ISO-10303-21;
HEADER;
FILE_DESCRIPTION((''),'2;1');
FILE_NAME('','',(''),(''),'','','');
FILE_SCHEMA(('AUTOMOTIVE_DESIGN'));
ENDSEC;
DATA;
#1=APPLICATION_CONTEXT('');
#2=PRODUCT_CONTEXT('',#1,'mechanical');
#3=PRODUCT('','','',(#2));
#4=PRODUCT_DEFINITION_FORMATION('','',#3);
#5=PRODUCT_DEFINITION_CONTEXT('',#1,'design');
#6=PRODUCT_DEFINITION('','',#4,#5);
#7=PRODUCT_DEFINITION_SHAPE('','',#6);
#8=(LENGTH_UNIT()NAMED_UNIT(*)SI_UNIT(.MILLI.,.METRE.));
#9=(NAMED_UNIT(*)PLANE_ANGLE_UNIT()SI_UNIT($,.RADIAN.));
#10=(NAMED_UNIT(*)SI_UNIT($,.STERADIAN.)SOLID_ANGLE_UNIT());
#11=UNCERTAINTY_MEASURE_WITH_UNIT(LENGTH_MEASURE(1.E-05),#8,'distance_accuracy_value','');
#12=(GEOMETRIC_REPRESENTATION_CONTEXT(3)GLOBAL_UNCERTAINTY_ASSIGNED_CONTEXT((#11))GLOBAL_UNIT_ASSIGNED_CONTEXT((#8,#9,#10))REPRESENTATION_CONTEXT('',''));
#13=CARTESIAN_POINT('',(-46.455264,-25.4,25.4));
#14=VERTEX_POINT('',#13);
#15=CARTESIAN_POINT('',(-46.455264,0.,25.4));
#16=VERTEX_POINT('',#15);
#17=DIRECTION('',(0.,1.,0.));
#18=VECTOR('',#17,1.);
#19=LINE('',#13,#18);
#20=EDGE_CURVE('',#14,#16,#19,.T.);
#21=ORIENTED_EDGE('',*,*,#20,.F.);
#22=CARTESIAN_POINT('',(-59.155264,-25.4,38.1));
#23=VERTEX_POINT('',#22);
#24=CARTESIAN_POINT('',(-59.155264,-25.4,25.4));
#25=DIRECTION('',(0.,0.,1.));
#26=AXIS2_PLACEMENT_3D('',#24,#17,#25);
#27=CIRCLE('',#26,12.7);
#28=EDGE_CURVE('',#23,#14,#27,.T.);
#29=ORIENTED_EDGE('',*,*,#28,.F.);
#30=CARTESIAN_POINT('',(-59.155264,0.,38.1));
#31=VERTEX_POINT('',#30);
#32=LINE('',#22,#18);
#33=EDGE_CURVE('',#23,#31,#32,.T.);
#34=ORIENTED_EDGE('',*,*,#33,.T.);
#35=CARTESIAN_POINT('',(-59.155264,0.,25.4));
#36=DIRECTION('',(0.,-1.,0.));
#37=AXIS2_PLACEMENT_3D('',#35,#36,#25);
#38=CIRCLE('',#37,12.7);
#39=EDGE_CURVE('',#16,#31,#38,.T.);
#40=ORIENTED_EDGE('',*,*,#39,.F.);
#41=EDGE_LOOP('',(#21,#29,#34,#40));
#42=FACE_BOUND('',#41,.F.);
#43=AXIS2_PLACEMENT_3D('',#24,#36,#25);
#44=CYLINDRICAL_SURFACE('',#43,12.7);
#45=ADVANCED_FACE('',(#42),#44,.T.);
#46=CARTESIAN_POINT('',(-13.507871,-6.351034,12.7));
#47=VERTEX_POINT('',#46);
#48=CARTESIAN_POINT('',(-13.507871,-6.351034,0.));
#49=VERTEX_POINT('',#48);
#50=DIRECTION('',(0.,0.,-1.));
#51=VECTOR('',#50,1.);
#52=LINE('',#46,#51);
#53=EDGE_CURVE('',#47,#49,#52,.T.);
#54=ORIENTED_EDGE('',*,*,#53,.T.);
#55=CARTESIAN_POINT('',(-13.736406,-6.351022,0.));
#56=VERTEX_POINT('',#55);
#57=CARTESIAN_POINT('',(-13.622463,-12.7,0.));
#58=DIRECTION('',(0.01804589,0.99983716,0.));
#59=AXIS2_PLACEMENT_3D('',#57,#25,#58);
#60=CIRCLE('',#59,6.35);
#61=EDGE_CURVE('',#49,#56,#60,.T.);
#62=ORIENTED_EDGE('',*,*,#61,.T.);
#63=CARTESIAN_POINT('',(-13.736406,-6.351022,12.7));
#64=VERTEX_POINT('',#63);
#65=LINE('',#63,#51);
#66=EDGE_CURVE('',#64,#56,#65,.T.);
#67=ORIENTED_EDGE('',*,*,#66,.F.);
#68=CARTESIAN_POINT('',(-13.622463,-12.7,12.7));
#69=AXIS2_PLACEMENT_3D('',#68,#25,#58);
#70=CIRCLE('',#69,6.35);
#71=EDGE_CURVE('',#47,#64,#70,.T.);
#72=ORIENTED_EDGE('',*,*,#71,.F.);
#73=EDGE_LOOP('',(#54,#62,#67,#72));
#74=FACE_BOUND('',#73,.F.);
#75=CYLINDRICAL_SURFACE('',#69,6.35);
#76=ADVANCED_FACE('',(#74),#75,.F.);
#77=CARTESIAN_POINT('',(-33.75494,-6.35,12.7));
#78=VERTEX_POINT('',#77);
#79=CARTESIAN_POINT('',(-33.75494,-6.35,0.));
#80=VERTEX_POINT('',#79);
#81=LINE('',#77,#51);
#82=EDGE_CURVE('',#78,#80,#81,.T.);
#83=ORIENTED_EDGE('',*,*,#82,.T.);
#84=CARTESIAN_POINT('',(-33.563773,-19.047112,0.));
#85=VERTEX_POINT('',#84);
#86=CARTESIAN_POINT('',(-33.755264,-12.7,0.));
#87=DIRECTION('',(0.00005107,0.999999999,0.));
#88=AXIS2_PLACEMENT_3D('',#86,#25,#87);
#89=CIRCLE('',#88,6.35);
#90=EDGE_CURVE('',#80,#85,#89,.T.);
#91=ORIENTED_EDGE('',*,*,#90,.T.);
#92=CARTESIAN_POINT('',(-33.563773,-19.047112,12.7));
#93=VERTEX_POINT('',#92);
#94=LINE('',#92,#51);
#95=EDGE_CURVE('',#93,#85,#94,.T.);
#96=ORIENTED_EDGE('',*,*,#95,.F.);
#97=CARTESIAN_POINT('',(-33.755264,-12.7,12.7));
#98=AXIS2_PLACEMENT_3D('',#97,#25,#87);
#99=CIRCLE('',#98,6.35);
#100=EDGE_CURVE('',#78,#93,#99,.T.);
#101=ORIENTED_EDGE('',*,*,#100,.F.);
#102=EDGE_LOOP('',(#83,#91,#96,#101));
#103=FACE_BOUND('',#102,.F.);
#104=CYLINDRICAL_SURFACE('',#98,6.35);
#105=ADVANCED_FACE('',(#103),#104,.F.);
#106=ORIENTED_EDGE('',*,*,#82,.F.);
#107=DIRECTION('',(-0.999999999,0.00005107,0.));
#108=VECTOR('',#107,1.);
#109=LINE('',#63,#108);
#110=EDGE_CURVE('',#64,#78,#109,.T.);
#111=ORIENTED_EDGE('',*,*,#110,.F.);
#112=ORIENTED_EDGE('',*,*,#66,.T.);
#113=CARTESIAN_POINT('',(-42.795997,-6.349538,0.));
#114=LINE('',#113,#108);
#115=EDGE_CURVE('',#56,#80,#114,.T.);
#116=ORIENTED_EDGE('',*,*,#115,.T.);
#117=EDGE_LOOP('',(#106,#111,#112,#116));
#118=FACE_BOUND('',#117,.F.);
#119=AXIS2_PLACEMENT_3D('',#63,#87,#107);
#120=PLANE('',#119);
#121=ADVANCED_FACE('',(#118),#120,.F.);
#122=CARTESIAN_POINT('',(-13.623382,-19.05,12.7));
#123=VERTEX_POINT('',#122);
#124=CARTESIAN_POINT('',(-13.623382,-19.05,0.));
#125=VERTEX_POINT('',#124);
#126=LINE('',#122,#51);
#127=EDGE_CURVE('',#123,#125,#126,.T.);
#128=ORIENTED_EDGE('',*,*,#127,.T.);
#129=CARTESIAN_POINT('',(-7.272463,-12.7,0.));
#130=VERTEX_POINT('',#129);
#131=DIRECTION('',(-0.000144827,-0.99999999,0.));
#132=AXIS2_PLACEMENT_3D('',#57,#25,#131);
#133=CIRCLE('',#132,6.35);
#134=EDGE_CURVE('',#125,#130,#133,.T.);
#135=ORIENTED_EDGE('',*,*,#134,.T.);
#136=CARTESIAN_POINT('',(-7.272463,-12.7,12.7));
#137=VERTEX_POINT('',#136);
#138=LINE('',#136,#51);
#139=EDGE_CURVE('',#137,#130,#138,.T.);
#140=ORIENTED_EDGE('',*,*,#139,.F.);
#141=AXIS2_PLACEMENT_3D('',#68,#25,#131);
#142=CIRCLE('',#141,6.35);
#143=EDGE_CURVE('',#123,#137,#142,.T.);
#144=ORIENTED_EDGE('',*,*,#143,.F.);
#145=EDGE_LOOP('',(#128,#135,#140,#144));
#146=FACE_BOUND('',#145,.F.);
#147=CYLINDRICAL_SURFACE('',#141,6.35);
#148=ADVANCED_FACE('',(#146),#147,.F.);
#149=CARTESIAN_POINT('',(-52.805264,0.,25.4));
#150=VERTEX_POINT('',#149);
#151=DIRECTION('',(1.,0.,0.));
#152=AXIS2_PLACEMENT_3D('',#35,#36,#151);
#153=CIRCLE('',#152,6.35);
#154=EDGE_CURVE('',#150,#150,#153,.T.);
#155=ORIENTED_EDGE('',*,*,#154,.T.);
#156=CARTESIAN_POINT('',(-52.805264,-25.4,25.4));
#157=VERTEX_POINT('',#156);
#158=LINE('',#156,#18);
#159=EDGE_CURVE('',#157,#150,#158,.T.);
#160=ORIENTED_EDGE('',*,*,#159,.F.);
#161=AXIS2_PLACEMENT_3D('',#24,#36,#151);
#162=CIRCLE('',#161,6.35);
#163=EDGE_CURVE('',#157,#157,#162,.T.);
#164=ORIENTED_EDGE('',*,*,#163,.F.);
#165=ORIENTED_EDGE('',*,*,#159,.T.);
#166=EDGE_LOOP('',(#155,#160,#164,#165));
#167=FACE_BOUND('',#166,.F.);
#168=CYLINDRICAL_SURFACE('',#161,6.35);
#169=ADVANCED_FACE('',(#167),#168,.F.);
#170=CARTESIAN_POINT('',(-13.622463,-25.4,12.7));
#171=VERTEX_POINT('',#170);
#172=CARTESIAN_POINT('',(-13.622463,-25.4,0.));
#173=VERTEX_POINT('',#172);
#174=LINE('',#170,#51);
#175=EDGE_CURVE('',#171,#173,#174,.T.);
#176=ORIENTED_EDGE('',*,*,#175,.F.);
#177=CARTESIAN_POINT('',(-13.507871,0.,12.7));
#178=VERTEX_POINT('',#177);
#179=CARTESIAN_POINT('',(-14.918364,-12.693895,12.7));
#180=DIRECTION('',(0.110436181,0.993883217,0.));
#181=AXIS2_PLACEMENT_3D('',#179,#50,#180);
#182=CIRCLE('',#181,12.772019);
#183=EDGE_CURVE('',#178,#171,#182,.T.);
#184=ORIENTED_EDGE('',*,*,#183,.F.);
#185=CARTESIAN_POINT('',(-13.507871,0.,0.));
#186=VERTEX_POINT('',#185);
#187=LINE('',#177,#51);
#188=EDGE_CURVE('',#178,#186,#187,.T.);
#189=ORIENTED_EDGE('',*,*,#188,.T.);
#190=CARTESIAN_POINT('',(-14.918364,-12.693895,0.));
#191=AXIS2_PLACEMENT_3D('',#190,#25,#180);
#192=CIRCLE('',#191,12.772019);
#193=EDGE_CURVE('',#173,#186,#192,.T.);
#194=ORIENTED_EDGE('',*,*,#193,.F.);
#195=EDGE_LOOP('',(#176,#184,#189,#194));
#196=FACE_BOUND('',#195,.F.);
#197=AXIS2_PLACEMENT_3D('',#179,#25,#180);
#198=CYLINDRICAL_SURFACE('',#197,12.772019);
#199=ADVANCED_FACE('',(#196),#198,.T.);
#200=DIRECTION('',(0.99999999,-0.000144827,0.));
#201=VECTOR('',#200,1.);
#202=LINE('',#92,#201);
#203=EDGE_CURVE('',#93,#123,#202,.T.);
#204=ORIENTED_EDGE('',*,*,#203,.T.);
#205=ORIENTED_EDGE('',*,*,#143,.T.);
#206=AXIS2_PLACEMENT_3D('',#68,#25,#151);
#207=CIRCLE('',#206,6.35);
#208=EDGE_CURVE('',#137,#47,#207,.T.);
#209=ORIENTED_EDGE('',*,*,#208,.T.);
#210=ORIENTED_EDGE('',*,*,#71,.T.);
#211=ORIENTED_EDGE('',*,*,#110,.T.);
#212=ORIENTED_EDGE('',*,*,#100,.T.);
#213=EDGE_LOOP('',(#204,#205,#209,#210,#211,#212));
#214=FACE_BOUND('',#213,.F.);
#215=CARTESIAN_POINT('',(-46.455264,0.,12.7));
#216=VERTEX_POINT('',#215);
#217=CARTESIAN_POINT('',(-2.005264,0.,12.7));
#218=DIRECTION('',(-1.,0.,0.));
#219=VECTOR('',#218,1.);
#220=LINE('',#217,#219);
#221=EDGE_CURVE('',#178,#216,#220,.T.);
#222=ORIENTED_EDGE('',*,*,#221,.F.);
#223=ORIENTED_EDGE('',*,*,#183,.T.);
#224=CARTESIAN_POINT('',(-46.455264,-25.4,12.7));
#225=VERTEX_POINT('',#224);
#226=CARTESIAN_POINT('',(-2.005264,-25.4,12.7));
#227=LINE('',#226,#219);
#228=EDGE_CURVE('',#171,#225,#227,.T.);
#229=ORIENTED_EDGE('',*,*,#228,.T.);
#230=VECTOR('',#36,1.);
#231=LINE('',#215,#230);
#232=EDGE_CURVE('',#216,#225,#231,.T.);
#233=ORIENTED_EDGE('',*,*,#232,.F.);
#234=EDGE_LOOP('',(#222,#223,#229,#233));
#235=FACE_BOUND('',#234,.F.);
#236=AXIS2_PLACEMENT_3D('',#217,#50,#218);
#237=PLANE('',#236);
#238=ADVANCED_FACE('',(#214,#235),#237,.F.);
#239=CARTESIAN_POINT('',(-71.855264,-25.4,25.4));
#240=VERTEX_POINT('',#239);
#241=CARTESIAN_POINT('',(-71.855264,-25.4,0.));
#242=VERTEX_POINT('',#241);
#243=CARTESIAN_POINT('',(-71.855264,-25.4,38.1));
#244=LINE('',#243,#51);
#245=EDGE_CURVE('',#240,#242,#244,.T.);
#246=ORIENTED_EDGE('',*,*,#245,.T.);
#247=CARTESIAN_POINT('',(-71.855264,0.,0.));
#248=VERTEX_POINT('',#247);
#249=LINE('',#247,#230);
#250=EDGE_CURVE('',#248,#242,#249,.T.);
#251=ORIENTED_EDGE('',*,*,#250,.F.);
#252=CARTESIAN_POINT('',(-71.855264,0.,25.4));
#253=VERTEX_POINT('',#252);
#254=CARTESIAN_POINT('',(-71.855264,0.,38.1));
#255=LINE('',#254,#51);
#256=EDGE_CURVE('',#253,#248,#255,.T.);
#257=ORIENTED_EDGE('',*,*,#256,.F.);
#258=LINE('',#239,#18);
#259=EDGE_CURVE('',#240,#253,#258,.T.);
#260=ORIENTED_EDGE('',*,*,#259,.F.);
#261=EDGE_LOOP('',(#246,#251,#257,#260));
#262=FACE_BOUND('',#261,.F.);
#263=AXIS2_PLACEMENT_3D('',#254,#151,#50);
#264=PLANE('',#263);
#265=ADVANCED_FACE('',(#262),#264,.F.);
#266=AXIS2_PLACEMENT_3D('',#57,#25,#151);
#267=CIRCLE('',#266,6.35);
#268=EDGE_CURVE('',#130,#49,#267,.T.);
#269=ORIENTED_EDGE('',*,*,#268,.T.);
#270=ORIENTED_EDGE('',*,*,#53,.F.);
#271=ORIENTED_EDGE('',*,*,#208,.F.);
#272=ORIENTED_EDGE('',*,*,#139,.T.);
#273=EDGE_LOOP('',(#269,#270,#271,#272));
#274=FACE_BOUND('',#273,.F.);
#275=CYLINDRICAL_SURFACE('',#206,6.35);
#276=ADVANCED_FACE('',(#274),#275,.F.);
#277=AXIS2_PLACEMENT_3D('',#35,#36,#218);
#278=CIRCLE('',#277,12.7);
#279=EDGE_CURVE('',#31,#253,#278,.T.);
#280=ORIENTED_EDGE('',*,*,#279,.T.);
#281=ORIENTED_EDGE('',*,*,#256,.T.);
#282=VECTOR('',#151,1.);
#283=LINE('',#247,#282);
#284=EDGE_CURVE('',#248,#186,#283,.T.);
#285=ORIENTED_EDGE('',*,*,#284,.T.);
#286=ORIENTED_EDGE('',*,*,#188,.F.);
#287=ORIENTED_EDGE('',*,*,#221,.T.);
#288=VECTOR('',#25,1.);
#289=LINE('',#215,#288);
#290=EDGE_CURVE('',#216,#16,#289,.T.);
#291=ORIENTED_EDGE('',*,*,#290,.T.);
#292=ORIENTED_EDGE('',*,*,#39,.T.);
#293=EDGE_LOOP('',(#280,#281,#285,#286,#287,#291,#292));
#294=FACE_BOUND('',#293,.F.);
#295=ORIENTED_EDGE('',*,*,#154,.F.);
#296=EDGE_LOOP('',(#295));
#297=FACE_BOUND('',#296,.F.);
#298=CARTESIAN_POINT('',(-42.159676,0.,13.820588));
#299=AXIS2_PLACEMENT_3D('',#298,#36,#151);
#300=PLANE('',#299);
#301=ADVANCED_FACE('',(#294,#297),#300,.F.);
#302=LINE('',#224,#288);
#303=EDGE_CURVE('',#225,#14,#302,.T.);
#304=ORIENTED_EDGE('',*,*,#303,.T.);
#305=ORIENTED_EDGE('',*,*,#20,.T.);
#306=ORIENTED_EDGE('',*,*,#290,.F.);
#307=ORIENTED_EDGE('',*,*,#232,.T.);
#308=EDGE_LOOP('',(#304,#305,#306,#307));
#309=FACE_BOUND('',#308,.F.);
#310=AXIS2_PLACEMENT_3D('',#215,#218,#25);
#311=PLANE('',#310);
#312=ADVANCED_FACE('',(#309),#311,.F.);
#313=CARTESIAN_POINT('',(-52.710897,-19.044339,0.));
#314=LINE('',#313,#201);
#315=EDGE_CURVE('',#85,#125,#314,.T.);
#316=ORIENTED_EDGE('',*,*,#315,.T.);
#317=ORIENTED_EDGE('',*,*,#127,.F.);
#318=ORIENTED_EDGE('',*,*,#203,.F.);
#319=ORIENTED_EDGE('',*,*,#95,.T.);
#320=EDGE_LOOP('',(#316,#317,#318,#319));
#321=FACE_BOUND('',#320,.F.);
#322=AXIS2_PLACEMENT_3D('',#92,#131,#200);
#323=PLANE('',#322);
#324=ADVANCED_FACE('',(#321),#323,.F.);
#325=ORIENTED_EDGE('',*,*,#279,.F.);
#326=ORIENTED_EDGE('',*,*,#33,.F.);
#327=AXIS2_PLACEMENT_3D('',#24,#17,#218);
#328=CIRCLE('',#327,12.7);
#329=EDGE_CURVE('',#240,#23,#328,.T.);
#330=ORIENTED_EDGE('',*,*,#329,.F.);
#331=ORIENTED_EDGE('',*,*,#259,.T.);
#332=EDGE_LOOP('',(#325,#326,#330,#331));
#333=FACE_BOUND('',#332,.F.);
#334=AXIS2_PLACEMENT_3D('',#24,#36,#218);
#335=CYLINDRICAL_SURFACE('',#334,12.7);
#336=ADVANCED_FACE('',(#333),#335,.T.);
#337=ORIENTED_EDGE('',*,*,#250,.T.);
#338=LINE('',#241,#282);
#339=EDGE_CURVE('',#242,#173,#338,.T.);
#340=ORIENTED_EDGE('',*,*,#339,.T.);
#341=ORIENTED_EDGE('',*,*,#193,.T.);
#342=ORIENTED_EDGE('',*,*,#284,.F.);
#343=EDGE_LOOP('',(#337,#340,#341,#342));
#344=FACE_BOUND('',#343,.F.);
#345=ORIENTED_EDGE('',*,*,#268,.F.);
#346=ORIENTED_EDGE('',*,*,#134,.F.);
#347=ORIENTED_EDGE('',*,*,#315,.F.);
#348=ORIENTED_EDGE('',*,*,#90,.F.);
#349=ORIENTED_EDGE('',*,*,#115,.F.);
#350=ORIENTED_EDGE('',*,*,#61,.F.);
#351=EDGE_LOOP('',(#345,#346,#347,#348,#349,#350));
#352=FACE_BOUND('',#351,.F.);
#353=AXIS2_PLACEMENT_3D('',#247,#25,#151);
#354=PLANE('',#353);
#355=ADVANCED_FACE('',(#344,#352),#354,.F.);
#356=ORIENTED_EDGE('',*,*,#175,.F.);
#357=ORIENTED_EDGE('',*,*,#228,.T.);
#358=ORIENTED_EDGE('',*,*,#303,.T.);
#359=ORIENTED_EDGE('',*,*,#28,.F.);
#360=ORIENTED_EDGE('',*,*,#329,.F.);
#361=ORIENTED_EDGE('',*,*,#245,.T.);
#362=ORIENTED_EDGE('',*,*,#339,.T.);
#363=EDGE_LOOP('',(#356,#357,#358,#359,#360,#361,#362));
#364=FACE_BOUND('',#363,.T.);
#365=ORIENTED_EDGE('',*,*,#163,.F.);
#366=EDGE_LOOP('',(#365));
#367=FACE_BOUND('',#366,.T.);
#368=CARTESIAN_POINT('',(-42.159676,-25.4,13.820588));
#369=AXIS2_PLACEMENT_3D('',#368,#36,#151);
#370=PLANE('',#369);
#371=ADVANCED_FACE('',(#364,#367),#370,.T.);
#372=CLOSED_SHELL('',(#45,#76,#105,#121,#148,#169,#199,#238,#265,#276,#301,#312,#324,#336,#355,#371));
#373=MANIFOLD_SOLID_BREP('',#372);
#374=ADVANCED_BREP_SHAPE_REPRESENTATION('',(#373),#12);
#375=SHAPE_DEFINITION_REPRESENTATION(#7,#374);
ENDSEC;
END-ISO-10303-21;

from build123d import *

# Parameters (mm, degrees)
F1_DEPTH = 25.4
F2_R     = 6.35
F3_DEPTH = 25.401
F5_DEPTH = 25.401
F7_DEPTH = 12.701


# Not quite as in the source:
# - a feature names something its author has since deleted; it is built from what else it names


with BuildPart() as f1:
    # F0 (on Front) → F1 (new body)
    with BuildSketch(Plane.XZ):
        Polygon((-46.455263897, 38.1), (-71.855263897, 38.1), (-71.855263897, 0), (-2.005263897, 0), (-2.005263897, 12.7), (-46.455263897, 12.7), align=None)
    extrude(amount=F1_DEPTH)

    # F2 (on face) → F3 (cut, through all)
    with BuildSketch(Plane.XZ.offset(25.4)):
        with Locations((-59.155263897, 25.4)):
            Circle(F2_R)
    extrude(amount=-F3_DEPTH, mode=Mode.SUBTRACT)

    # F4 (on face) → F5 (cut, through all)
    with BuildSketch(Plane.XZ.offset(25.4)):
        with BuildLine():
            ThreePointArc((-71.855263897, 25.4), (-68.135520018, 34.3802561211), (-59.155263897, 38.1))
            Line((-59.155263897, 38.1), (-71.855263897, 38.1))
            Line((-71.855263897, 38.1), (-71.855263897, 25.4))
        make_face()
        with BuildLine():
            ThreePointArc((-59.155263897, 38.1), (-50.1750077759, 34.3802561211), (-46.455263897, 25.4))
            Line((-46.455263897, 25.4), (-46.455263897, 38.1))
            Line((-46.455263897, 38.1), (-59.155263897, 38.1))
        make_face()
    extrude(amount=-F5_DEPTH, mode=Mode.SUBTRACT)

    # F6 (on face) → F7 (cut, through all)
    with BuildSketch(Plane.XY.offset(12.7)):
        with BuildLine():
            ThreePointArc((-13.507871342, -6.3510340362), (-13.6221384518, -6.3500000083), (-13.7364056666, -6.3510223648))
            Line((-13.7364056666, -6.3510223648), (-13.507871342, -6.3510340362))
        make_face()
        with BuildLine():
            Line((-13.507871342, -6.3510340362), (-13.7364056666, -6.3510223648))
            ThreePointArc((-13.7364056666, -6.3510223648), (-19.9722112621, -12.7565139443), (-13.6233824013, -19.0499999334))
            ThreePointArc((-13.6233824013, -19.0499999334), (-9.1326598467, -17.1904531948), (-7.2724627495, -12.7))
            ThreePointArc((-7.2724627495, -12.7), (-9.0920016561, -8.2505705668), (-13.507871342, -6.3510340362))
        make_face()
        with BuildLine():
            ThreePointArc((-33.7549395993, -6.3500000083), (-29.2650211814, -8.2099865975), (-27.405263897, -12.7))
            ThreePointArc((-27.405263897, -12.7), (-29.1979362777, -17.1219073906), (-33.5637725492, -19.0471120255))
            Line((-33.5637725492, -19.0471120255), (-13.6233824013, -19.0499999334))
            ThreePointArc((-13.6233824013, -19.0499999334), (-19.9722112621, -12.7565139443), (-13.7364056666, -6.3510223648))
            Line((-13.7364056666, -6.3510223648), (-33.7549395993, -6.3500000083))
        make_face()
        with BuildLine():
            ThreePointArc((-33.5637725492, -19.0471120255), (-29.1979362777, -17.1219073906), (-27.405263897, -12.7))
            ThreePointArc((-27.405263897, -12.7), (-29.2650211814, -8.2099865975), (-33.7549395993, -6.3500000083))
            ThreePointArc((-33.7549395993, -6.3500000083), (-40.1045443054, -12.7955944315), (-33.5637725492, -19.0471120255))
        make_face()
        with BuildLine():
            ThreePointArc((-13.507871342, 0), (-2.1464755419, -12.7515151154), (-13.6224627495, -25.4))
            Line((-13.6224627495, -25.4), (-2.005263897, -25.4))
            Line((-2.005263897, -25.4), (-2.005263897, 0))
            Line((-2.005263897, 0), (-13.507871342, 0))
        make_face()
    extrude(amount=-F7_DEPTH, mode=Mode.SUBTRACT)


solid = f1.part
